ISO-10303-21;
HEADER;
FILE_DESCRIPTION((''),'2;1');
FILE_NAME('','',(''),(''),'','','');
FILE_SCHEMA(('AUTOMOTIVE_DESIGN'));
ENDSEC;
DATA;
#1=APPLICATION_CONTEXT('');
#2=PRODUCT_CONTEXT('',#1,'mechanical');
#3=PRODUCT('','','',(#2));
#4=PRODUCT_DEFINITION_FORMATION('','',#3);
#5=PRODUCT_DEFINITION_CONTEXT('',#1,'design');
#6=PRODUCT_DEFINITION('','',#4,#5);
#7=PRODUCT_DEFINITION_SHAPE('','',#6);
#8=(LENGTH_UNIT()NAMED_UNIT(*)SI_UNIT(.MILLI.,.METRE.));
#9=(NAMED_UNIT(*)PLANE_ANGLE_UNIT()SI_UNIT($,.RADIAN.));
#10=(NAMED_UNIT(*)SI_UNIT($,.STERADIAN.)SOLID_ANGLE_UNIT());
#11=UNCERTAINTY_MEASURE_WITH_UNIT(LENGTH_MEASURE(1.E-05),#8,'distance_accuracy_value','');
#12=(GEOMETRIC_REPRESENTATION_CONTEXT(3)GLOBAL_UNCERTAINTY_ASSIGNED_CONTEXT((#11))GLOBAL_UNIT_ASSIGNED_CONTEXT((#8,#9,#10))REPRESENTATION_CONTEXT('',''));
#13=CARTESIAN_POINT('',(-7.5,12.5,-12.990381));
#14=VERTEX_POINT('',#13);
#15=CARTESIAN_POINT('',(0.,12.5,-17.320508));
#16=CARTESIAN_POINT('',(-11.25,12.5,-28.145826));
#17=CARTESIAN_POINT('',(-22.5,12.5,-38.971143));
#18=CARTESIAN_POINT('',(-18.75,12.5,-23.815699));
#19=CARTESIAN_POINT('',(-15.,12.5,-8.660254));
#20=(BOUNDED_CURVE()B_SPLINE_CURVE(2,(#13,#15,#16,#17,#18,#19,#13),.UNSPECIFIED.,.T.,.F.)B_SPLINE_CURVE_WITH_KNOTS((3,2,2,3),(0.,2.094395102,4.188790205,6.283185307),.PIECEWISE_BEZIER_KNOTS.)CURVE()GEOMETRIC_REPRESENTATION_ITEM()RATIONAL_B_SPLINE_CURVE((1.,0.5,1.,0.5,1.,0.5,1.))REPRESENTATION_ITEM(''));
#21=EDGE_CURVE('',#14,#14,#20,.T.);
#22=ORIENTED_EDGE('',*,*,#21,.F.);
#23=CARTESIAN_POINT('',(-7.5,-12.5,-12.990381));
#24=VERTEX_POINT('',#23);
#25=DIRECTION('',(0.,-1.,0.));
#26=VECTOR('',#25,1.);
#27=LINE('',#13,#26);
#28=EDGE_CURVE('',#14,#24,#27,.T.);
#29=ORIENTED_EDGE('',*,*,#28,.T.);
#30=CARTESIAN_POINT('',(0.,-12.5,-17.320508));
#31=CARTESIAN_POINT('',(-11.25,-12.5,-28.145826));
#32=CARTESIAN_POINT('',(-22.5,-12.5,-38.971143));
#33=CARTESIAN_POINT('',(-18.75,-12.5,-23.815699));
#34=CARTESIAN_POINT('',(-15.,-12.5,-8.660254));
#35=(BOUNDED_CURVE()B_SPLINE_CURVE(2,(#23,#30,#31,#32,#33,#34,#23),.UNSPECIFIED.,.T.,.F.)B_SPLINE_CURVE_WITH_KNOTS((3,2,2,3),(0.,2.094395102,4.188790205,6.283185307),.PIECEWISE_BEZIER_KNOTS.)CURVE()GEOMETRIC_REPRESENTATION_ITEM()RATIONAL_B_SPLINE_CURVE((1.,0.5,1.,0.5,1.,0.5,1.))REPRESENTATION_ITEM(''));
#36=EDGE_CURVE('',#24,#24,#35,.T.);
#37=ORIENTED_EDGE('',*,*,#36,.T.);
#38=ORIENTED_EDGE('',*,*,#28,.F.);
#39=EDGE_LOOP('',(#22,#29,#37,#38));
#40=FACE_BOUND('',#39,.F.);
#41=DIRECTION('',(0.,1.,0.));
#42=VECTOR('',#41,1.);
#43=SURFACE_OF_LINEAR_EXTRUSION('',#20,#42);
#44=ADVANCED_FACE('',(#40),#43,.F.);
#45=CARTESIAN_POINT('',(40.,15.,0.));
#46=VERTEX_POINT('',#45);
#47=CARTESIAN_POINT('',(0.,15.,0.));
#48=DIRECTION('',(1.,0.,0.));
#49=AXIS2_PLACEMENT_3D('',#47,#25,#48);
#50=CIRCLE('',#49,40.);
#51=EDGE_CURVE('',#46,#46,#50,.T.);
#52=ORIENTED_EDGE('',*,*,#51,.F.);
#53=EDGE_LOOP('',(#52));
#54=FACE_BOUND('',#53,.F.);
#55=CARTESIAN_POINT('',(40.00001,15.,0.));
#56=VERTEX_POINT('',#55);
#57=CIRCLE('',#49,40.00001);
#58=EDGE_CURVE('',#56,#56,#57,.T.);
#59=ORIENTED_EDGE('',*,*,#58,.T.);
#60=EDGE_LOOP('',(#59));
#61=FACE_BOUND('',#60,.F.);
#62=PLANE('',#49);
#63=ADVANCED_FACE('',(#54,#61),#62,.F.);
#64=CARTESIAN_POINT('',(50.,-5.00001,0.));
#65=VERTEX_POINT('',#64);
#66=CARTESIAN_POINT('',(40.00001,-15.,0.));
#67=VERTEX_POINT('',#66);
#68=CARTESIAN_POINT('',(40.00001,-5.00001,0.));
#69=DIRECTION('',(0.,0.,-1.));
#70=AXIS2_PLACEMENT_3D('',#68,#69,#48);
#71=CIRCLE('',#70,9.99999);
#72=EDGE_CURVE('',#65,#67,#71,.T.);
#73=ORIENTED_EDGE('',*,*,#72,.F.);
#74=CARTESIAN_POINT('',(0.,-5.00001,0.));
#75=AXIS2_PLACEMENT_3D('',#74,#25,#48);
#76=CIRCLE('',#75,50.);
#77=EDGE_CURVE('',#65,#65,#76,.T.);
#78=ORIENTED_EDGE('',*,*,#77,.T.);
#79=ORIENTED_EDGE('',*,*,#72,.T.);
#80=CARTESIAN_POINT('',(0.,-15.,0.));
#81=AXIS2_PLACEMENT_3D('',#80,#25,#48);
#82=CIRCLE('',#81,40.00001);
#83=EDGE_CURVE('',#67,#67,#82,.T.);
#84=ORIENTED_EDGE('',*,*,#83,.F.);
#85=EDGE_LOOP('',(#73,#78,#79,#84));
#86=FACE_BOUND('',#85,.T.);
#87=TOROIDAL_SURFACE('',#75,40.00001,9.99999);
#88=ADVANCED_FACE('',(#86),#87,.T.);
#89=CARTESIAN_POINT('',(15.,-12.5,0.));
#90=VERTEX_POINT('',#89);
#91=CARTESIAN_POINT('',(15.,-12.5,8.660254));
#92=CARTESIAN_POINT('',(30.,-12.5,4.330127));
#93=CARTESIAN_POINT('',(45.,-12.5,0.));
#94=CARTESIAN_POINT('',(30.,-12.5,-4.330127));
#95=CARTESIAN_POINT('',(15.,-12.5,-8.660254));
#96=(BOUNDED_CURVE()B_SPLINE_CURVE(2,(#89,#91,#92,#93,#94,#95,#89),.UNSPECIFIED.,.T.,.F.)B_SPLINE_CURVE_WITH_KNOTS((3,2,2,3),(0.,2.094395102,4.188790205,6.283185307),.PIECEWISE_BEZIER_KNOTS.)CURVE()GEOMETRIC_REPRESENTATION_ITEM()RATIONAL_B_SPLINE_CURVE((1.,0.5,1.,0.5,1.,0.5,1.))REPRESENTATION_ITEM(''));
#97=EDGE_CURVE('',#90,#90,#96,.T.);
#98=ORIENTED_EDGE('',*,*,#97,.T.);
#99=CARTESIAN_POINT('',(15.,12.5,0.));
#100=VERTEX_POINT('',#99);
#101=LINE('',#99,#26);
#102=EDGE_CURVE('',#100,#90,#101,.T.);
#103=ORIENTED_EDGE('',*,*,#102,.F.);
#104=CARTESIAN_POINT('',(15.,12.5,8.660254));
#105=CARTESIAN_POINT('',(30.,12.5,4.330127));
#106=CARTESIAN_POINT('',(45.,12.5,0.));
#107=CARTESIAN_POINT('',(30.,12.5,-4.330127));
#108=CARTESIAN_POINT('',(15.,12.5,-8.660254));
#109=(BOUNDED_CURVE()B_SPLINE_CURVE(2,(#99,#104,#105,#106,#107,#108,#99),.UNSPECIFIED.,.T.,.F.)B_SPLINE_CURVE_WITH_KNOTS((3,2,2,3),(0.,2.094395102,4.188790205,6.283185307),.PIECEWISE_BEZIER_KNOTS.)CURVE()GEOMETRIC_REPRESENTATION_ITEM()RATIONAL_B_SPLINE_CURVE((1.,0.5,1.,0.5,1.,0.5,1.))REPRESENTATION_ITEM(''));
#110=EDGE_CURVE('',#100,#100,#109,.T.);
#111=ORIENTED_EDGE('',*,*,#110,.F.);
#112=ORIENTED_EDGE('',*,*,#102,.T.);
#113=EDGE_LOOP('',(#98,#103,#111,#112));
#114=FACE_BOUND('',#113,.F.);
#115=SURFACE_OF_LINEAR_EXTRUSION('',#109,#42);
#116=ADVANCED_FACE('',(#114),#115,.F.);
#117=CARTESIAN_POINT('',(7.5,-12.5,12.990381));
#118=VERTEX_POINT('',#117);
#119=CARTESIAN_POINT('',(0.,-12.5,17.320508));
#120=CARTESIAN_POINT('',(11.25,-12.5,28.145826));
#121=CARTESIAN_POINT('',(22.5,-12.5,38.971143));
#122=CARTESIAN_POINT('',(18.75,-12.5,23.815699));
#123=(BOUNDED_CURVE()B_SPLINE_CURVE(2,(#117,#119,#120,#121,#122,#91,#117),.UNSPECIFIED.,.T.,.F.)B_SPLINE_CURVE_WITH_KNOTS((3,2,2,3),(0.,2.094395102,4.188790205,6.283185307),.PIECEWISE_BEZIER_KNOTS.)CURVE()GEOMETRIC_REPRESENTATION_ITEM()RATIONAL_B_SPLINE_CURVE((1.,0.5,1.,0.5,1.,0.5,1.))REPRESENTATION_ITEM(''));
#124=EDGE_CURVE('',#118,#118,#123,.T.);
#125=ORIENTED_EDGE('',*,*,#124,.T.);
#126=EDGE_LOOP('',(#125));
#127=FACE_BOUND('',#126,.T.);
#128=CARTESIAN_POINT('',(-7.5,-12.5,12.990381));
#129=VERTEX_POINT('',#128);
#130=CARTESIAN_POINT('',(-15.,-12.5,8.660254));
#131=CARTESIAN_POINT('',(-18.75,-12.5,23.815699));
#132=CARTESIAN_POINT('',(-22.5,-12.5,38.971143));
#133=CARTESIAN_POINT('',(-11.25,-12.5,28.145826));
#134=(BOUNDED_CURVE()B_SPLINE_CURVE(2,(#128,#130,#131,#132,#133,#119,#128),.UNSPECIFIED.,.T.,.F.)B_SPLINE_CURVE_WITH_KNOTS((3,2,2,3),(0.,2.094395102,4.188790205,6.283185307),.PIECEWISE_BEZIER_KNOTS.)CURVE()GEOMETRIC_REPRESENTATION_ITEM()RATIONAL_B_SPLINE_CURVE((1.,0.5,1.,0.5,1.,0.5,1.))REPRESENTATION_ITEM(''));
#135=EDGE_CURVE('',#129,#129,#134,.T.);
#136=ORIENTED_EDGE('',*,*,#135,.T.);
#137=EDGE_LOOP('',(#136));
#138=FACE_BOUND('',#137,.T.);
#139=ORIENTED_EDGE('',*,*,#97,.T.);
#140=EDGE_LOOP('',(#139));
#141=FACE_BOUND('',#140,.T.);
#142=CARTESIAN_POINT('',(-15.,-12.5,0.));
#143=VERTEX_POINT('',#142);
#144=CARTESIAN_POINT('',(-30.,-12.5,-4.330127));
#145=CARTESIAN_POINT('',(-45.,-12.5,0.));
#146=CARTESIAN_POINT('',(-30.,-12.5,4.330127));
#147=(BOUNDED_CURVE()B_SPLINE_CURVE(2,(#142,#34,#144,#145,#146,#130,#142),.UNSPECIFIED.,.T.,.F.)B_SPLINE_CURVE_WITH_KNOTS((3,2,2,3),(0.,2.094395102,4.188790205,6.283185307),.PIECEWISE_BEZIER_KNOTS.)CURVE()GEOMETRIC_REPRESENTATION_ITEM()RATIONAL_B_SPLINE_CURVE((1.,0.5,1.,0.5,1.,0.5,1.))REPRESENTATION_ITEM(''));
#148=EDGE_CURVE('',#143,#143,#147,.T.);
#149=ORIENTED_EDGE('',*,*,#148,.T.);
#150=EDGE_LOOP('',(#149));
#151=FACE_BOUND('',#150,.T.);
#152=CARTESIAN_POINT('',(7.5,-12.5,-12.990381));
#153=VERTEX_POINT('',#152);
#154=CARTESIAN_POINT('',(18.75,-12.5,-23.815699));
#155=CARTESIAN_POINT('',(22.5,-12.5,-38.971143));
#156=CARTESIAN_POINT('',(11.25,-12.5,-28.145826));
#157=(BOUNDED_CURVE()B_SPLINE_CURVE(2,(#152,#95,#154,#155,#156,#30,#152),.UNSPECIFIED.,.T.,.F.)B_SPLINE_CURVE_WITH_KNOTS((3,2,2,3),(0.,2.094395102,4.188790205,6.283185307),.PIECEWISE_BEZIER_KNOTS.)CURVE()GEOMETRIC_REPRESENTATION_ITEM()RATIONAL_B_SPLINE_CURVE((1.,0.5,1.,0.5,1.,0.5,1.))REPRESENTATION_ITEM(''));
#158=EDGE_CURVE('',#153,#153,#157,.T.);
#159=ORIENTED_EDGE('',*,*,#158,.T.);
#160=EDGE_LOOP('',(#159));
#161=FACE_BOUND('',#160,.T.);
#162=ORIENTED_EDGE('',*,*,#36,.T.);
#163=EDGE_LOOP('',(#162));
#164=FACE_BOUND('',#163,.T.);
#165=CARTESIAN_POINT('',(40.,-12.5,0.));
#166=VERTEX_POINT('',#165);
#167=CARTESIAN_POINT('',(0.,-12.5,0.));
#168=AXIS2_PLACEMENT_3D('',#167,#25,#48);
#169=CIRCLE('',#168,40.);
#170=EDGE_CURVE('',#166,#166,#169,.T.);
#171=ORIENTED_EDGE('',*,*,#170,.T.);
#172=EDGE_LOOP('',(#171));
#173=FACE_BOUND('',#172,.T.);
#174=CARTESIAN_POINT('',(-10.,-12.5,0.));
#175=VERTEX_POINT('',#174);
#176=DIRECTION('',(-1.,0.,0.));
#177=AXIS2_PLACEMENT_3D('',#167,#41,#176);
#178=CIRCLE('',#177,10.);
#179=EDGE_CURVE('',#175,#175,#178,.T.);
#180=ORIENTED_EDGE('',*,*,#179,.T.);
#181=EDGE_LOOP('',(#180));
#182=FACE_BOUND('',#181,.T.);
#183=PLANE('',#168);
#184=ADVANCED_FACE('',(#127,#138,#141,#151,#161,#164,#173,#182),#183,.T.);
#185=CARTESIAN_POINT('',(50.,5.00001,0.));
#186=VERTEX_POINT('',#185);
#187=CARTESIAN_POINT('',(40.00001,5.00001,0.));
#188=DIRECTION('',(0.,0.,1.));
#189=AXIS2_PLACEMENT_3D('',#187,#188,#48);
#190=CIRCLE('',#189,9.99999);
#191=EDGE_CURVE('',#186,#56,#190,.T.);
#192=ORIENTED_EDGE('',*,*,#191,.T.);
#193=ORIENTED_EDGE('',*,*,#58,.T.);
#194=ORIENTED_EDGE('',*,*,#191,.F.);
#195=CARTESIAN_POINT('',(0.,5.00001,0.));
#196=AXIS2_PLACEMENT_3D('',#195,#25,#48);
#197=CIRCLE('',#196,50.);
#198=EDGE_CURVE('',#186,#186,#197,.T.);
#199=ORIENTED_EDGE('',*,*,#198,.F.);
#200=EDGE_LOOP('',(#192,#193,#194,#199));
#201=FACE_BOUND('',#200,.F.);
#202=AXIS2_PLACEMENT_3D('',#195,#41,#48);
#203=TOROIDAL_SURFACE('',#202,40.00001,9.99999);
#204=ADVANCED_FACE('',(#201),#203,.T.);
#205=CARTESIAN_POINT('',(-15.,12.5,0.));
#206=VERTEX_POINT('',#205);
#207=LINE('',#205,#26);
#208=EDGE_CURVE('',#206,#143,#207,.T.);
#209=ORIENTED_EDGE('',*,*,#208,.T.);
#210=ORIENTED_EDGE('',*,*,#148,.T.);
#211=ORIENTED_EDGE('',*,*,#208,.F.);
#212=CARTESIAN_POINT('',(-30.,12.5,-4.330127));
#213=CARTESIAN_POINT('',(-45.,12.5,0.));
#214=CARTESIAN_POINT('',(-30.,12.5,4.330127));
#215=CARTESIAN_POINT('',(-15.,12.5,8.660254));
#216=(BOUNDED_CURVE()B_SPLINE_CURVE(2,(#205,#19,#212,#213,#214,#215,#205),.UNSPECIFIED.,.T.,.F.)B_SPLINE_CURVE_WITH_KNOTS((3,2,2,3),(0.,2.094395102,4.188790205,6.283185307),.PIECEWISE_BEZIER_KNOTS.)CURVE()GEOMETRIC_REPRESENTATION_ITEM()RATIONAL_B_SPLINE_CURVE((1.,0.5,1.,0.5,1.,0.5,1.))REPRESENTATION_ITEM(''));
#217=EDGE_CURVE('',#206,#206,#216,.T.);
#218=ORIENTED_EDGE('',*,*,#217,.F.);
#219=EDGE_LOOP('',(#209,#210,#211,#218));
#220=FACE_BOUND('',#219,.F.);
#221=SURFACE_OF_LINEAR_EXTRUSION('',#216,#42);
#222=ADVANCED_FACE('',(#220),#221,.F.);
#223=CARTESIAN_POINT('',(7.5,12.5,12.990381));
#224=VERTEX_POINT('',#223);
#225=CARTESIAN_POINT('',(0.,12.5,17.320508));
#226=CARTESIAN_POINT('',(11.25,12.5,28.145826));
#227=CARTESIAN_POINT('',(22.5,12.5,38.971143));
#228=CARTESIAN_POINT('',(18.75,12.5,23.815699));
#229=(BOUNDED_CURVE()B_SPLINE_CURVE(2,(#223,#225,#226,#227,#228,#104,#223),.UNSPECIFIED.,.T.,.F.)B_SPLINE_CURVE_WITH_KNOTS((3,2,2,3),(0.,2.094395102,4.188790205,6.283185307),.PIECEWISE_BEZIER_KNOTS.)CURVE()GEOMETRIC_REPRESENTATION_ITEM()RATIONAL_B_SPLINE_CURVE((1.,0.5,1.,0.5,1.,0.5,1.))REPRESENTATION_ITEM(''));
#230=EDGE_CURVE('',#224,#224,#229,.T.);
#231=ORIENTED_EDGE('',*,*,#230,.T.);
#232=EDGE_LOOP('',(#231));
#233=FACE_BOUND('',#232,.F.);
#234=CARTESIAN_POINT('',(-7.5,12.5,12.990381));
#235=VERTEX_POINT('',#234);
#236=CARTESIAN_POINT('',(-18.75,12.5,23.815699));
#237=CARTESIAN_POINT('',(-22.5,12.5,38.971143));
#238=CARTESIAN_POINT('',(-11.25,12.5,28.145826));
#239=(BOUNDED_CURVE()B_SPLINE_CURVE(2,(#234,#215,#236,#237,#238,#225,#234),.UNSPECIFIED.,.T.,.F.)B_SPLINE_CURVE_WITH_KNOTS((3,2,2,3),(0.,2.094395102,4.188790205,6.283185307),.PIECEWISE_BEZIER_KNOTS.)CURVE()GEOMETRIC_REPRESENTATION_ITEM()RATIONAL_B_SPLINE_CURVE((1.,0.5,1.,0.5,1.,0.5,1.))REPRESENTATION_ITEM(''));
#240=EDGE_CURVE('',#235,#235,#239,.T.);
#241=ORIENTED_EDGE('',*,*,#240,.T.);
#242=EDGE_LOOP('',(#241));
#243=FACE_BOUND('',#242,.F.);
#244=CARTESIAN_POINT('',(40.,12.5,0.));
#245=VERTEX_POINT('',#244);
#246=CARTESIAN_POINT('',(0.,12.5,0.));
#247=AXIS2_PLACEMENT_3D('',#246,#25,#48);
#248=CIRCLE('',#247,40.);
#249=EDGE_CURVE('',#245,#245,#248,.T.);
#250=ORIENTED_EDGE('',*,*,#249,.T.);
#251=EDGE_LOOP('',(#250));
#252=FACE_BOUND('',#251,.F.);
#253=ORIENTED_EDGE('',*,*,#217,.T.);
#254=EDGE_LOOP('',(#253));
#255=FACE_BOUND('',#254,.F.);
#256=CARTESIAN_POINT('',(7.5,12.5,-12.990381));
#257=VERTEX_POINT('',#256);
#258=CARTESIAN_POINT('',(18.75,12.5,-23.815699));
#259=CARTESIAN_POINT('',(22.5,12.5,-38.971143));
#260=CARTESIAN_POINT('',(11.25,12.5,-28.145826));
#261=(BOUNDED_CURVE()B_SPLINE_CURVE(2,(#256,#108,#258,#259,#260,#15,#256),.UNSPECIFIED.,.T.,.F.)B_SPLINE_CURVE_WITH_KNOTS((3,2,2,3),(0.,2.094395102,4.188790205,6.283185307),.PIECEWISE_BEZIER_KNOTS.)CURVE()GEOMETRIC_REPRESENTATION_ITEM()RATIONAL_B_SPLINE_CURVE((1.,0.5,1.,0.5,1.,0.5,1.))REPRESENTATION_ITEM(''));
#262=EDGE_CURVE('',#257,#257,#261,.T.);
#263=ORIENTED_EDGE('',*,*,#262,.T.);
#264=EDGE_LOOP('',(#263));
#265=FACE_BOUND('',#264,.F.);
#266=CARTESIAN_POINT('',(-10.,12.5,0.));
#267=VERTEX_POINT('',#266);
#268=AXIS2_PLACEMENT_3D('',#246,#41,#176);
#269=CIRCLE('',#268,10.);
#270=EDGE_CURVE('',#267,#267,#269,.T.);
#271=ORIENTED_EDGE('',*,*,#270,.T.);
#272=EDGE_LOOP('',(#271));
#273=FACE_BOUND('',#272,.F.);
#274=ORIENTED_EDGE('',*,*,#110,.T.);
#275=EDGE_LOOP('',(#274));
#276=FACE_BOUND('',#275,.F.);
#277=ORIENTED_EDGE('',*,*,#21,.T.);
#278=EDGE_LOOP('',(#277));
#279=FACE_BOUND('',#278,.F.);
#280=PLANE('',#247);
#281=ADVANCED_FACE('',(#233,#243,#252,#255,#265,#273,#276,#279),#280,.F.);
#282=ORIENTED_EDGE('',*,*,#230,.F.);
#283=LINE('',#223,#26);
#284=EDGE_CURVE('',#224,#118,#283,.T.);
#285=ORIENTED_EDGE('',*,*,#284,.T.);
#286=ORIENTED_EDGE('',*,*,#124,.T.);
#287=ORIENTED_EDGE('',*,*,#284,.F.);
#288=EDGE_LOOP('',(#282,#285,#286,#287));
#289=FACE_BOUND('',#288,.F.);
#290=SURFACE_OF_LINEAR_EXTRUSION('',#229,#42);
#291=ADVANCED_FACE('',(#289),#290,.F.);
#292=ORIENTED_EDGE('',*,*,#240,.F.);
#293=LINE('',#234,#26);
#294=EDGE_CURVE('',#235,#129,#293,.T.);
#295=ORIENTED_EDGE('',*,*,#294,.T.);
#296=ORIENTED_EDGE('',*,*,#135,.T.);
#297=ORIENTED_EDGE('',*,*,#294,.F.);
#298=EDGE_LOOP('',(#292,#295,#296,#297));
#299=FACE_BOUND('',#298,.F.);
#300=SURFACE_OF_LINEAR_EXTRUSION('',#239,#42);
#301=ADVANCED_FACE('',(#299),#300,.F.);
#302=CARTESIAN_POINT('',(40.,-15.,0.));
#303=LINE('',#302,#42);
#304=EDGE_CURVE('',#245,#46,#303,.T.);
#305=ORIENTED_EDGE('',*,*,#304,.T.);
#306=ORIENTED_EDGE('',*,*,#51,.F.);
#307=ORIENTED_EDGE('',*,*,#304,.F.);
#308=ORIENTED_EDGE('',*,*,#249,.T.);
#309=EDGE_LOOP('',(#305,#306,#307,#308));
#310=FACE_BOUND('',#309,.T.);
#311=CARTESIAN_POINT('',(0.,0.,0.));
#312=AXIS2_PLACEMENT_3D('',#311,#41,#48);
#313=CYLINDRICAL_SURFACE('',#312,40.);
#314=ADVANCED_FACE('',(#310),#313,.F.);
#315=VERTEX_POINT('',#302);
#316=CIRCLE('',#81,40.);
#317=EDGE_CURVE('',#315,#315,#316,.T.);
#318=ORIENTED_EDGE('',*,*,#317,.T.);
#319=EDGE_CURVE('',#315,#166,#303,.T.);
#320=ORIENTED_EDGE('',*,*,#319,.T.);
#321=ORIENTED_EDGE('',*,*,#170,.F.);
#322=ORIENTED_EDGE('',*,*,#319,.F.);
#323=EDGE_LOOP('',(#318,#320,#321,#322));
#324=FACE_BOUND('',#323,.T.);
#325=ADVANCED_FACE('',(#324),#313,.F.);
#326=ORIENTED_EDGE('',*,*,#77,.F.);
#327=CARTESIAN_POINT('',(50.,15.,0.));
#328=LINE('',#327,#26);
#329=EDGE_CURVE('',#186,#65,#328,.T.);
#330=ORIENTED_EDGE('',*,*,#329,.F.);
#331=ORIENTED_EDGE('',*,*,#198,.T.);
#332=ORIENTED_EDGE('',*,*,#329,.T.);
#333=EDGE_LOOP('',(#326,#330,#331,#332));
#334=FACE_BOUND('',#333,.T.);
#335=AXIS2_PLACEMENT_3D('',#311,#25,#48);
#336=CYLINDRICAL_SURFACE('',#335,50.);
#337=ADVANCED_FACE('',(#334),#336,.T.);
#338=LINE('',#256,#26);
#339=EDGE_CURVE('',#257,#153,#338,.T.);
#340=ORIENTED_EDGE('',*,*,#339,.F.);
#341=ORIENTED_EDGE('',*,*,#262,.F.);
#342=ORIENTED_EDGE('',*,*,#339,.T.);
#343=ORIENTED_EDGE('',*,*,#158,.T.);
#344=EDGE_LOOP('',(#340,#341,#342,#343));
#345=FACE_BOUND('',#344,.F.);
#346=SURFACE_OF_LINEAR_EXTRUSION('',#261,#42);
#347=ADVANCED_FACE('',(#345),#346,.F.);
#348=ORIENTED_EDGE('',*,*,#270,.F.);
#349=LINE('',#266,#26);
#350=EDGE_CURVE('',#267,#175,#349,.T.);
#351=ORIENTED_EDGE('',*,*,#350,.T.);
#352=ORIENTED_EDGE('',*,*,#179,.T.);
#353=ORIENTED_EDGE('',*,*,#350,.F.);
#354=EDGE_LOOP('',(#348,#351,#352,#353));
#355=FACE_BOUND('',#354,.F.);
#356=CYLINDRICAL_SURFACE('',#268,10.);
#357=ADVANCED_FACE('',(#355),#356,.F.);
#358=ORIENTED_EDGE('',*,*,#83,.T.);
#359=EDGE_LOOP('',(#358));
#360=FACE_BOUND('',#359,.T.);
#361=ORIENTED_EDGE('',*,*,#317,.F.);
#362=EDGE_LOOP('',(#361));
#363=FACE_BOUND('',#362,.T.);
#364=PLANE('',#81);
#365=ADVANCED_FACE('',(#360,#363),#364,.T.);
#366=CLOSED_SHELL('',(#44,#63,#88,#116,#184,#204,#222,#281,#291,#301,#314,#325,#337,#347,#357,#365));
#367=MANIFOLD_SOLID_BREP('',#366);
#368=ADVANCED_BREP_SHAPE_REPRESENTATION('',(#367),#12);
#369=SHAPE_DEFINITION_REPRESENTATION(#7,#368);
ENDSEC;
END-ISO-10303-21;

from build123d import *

# Parameters (mm, degrees)
F0_R     = 50
F0_R_2   = 40
F1_DEPTH = 15
F2_DEPTH = 12.5
F4_DEPTH = 25
F5_R     = 10
F6_DEPTH = 25
F7_R     = 9.99999


# Not quite as in the source:
# - a fillet or chamfer is up to 0.001 mm smaller than in the source, because OpenCascade refuses the exact size


with BuildPart() as f1:
    # F0 (on Front) → F1 (new body, symmetric)
    with BuildSketch(Plane.XZ):
        Circle(F0_R)
        Circle(F0_R_2, mode=Mode.SUBTRACT)
    extrude(amount=F1_DEPTH, both=True)

    # F0 (on Front) → F2 (join, symmetric)
    with BuildSketch(Plane.XZ):
        Circle(F0_R_2)
    extrude(amount=F2_DEPTH, both=True)

    # F3 (on face) → F4 (cut, through all)
    with BuildSketch(Plane(origin=(0, 12.5, 0), x_dir=(-1, 0, 0), z_dir=(0, 1, 0))):
        with BuildLine():
            add(Edge.make_bspline(
                [(7.5, 12.9903810568), (15, 8.6602540378), (18.75, 23.8156986041), (22.5, 38.9711431703), (11.25, 28.145825623), (0, 17.3205080757), (7.5, 12.9903810568)],
                knots=[0, 0, 0, 2.0943951024, 2.0943951024, 4.1887902048, 4.1887902048, 6.2831853072, 6.2831853072, 6.2831853072], degree=2, weights=[1, 0.5, 1, 0.5, 1, 0.5, 1]))
        make_face()
        with BuildLine():
            add(Edge.make_bspline(
                [(15, 0), (15, -8.6602540378), (30, -4.3301270189), (45, 0), (30, 4.3301270189), (15, 8.6602540378), (15, 0)],
                knots=[0, 0, 0, 2.0943951024, 2.0943951024, 4.1887902048, 4.1887902048, 6.2831853072, 6.2831853072, 6.2831853072], degree=2, weights=[1, 0.5, 1, 0.5, 1, 0.5, 1]))
        make_face()
        with BuildLine():
            add(Edge.make_bspline(
                [(7.5, -12.9903810568), (0, -17.3205080757), (11.25, -28.145825623), (22.5, -38.9711431703), (18.75, -23.8156986041), (15, -8.6602540378), (7.5, -12.9903810568)],
                knots=[0, 0, 0, 2.0943951024, 2.0943951024, 4.1887902048, 4.1887902048, 6.2831853072, 6.2831853072, 6.2831853072], degree=2, weights=[1, 0.5, 1, 0.5, 1, 0.5, 1]))
        make_face()
        with BuildLine():
            add(Edge.make_bspline(
                [(-7.5, -12.9903810568), (-15, -8.6602540378), (-18.75, -23.8156986041), (-22.5, -38.9711431703), (-11.25, -28.145825623), (0, -17.3205080757), (-7.5, -12.9903810568)],
                knots=[0, 0, 0, 2.0943951024, 2.0943951024, 4.1887902048, 4.1887902048, 6.2831853072, 6.2831853072, 6.2831853072], degree=2, weights=[1, 0.5, 1, 0.5, 1, 0.5, 1]))
        make_face()
        with BuildLine():
            add(Edge.make_bspline(
                [(-15, 0), (-15, 8.6602540378), (-30, 4.3301270189), (-45, 0), (-30, -4.3301270189), (-15, -8.6602540378), (-15, 0)],
                knots=[0, 0, 0, 2.0943951024, 2.0943951024, 4.1887902048, 4.1887902048, 6.2831853072, 6.2831853072, 6.2831853072], degree=2, weights=[1, 0.5, 1, 0.5, 1, 0.5, 1]))
        make_face()
        with BuildLine():
            add(Edge.make_bspline(
                [(-7.5, 12.9903810568), (0, 17.3205080757), (-11.25, 28.145825623), (-22.5, 38.9711431703), (-18.75, 23.8156986041), (-15, 8.6602540378), (-7.5, 12.9903810568)],
                knots=[0, 0, 0, 2.0943951024, 2.0943951024, 4.1887902048, 4.1887902048, 6.2831853072, 6.2831853072, 6.2831853072], degree=2, weights=[1, 0.5, 1, 0.5, 1, 0.5, 1]))
        make_face()
    extrude(amount=-F4_DEPTH, mode=Mode.SUBTRACT)

    # F5 (on face) → F6 (cut, through all)
    with BuildSketch(Plane(origin=(0, 12.5, 0), x_dir=(-1, 0, 0), z_dir=(0, 1, 0))):
        Circle(F5_R)
    extrude(amount=-F6_DEPTH, mode=Mode.SUBTRACT)

    # F7 (radius 10 in the source; OpenCascade refuses exactly that, so slightly less here)
    f7_edges = [f1.edges().sort_by_distance(p)[0] for p in [
        (-50, 15, 0),
        (-50, -15, 0),
    ]]
    fillet(f7_edges, radius=F7_R)


solid = f1.part
